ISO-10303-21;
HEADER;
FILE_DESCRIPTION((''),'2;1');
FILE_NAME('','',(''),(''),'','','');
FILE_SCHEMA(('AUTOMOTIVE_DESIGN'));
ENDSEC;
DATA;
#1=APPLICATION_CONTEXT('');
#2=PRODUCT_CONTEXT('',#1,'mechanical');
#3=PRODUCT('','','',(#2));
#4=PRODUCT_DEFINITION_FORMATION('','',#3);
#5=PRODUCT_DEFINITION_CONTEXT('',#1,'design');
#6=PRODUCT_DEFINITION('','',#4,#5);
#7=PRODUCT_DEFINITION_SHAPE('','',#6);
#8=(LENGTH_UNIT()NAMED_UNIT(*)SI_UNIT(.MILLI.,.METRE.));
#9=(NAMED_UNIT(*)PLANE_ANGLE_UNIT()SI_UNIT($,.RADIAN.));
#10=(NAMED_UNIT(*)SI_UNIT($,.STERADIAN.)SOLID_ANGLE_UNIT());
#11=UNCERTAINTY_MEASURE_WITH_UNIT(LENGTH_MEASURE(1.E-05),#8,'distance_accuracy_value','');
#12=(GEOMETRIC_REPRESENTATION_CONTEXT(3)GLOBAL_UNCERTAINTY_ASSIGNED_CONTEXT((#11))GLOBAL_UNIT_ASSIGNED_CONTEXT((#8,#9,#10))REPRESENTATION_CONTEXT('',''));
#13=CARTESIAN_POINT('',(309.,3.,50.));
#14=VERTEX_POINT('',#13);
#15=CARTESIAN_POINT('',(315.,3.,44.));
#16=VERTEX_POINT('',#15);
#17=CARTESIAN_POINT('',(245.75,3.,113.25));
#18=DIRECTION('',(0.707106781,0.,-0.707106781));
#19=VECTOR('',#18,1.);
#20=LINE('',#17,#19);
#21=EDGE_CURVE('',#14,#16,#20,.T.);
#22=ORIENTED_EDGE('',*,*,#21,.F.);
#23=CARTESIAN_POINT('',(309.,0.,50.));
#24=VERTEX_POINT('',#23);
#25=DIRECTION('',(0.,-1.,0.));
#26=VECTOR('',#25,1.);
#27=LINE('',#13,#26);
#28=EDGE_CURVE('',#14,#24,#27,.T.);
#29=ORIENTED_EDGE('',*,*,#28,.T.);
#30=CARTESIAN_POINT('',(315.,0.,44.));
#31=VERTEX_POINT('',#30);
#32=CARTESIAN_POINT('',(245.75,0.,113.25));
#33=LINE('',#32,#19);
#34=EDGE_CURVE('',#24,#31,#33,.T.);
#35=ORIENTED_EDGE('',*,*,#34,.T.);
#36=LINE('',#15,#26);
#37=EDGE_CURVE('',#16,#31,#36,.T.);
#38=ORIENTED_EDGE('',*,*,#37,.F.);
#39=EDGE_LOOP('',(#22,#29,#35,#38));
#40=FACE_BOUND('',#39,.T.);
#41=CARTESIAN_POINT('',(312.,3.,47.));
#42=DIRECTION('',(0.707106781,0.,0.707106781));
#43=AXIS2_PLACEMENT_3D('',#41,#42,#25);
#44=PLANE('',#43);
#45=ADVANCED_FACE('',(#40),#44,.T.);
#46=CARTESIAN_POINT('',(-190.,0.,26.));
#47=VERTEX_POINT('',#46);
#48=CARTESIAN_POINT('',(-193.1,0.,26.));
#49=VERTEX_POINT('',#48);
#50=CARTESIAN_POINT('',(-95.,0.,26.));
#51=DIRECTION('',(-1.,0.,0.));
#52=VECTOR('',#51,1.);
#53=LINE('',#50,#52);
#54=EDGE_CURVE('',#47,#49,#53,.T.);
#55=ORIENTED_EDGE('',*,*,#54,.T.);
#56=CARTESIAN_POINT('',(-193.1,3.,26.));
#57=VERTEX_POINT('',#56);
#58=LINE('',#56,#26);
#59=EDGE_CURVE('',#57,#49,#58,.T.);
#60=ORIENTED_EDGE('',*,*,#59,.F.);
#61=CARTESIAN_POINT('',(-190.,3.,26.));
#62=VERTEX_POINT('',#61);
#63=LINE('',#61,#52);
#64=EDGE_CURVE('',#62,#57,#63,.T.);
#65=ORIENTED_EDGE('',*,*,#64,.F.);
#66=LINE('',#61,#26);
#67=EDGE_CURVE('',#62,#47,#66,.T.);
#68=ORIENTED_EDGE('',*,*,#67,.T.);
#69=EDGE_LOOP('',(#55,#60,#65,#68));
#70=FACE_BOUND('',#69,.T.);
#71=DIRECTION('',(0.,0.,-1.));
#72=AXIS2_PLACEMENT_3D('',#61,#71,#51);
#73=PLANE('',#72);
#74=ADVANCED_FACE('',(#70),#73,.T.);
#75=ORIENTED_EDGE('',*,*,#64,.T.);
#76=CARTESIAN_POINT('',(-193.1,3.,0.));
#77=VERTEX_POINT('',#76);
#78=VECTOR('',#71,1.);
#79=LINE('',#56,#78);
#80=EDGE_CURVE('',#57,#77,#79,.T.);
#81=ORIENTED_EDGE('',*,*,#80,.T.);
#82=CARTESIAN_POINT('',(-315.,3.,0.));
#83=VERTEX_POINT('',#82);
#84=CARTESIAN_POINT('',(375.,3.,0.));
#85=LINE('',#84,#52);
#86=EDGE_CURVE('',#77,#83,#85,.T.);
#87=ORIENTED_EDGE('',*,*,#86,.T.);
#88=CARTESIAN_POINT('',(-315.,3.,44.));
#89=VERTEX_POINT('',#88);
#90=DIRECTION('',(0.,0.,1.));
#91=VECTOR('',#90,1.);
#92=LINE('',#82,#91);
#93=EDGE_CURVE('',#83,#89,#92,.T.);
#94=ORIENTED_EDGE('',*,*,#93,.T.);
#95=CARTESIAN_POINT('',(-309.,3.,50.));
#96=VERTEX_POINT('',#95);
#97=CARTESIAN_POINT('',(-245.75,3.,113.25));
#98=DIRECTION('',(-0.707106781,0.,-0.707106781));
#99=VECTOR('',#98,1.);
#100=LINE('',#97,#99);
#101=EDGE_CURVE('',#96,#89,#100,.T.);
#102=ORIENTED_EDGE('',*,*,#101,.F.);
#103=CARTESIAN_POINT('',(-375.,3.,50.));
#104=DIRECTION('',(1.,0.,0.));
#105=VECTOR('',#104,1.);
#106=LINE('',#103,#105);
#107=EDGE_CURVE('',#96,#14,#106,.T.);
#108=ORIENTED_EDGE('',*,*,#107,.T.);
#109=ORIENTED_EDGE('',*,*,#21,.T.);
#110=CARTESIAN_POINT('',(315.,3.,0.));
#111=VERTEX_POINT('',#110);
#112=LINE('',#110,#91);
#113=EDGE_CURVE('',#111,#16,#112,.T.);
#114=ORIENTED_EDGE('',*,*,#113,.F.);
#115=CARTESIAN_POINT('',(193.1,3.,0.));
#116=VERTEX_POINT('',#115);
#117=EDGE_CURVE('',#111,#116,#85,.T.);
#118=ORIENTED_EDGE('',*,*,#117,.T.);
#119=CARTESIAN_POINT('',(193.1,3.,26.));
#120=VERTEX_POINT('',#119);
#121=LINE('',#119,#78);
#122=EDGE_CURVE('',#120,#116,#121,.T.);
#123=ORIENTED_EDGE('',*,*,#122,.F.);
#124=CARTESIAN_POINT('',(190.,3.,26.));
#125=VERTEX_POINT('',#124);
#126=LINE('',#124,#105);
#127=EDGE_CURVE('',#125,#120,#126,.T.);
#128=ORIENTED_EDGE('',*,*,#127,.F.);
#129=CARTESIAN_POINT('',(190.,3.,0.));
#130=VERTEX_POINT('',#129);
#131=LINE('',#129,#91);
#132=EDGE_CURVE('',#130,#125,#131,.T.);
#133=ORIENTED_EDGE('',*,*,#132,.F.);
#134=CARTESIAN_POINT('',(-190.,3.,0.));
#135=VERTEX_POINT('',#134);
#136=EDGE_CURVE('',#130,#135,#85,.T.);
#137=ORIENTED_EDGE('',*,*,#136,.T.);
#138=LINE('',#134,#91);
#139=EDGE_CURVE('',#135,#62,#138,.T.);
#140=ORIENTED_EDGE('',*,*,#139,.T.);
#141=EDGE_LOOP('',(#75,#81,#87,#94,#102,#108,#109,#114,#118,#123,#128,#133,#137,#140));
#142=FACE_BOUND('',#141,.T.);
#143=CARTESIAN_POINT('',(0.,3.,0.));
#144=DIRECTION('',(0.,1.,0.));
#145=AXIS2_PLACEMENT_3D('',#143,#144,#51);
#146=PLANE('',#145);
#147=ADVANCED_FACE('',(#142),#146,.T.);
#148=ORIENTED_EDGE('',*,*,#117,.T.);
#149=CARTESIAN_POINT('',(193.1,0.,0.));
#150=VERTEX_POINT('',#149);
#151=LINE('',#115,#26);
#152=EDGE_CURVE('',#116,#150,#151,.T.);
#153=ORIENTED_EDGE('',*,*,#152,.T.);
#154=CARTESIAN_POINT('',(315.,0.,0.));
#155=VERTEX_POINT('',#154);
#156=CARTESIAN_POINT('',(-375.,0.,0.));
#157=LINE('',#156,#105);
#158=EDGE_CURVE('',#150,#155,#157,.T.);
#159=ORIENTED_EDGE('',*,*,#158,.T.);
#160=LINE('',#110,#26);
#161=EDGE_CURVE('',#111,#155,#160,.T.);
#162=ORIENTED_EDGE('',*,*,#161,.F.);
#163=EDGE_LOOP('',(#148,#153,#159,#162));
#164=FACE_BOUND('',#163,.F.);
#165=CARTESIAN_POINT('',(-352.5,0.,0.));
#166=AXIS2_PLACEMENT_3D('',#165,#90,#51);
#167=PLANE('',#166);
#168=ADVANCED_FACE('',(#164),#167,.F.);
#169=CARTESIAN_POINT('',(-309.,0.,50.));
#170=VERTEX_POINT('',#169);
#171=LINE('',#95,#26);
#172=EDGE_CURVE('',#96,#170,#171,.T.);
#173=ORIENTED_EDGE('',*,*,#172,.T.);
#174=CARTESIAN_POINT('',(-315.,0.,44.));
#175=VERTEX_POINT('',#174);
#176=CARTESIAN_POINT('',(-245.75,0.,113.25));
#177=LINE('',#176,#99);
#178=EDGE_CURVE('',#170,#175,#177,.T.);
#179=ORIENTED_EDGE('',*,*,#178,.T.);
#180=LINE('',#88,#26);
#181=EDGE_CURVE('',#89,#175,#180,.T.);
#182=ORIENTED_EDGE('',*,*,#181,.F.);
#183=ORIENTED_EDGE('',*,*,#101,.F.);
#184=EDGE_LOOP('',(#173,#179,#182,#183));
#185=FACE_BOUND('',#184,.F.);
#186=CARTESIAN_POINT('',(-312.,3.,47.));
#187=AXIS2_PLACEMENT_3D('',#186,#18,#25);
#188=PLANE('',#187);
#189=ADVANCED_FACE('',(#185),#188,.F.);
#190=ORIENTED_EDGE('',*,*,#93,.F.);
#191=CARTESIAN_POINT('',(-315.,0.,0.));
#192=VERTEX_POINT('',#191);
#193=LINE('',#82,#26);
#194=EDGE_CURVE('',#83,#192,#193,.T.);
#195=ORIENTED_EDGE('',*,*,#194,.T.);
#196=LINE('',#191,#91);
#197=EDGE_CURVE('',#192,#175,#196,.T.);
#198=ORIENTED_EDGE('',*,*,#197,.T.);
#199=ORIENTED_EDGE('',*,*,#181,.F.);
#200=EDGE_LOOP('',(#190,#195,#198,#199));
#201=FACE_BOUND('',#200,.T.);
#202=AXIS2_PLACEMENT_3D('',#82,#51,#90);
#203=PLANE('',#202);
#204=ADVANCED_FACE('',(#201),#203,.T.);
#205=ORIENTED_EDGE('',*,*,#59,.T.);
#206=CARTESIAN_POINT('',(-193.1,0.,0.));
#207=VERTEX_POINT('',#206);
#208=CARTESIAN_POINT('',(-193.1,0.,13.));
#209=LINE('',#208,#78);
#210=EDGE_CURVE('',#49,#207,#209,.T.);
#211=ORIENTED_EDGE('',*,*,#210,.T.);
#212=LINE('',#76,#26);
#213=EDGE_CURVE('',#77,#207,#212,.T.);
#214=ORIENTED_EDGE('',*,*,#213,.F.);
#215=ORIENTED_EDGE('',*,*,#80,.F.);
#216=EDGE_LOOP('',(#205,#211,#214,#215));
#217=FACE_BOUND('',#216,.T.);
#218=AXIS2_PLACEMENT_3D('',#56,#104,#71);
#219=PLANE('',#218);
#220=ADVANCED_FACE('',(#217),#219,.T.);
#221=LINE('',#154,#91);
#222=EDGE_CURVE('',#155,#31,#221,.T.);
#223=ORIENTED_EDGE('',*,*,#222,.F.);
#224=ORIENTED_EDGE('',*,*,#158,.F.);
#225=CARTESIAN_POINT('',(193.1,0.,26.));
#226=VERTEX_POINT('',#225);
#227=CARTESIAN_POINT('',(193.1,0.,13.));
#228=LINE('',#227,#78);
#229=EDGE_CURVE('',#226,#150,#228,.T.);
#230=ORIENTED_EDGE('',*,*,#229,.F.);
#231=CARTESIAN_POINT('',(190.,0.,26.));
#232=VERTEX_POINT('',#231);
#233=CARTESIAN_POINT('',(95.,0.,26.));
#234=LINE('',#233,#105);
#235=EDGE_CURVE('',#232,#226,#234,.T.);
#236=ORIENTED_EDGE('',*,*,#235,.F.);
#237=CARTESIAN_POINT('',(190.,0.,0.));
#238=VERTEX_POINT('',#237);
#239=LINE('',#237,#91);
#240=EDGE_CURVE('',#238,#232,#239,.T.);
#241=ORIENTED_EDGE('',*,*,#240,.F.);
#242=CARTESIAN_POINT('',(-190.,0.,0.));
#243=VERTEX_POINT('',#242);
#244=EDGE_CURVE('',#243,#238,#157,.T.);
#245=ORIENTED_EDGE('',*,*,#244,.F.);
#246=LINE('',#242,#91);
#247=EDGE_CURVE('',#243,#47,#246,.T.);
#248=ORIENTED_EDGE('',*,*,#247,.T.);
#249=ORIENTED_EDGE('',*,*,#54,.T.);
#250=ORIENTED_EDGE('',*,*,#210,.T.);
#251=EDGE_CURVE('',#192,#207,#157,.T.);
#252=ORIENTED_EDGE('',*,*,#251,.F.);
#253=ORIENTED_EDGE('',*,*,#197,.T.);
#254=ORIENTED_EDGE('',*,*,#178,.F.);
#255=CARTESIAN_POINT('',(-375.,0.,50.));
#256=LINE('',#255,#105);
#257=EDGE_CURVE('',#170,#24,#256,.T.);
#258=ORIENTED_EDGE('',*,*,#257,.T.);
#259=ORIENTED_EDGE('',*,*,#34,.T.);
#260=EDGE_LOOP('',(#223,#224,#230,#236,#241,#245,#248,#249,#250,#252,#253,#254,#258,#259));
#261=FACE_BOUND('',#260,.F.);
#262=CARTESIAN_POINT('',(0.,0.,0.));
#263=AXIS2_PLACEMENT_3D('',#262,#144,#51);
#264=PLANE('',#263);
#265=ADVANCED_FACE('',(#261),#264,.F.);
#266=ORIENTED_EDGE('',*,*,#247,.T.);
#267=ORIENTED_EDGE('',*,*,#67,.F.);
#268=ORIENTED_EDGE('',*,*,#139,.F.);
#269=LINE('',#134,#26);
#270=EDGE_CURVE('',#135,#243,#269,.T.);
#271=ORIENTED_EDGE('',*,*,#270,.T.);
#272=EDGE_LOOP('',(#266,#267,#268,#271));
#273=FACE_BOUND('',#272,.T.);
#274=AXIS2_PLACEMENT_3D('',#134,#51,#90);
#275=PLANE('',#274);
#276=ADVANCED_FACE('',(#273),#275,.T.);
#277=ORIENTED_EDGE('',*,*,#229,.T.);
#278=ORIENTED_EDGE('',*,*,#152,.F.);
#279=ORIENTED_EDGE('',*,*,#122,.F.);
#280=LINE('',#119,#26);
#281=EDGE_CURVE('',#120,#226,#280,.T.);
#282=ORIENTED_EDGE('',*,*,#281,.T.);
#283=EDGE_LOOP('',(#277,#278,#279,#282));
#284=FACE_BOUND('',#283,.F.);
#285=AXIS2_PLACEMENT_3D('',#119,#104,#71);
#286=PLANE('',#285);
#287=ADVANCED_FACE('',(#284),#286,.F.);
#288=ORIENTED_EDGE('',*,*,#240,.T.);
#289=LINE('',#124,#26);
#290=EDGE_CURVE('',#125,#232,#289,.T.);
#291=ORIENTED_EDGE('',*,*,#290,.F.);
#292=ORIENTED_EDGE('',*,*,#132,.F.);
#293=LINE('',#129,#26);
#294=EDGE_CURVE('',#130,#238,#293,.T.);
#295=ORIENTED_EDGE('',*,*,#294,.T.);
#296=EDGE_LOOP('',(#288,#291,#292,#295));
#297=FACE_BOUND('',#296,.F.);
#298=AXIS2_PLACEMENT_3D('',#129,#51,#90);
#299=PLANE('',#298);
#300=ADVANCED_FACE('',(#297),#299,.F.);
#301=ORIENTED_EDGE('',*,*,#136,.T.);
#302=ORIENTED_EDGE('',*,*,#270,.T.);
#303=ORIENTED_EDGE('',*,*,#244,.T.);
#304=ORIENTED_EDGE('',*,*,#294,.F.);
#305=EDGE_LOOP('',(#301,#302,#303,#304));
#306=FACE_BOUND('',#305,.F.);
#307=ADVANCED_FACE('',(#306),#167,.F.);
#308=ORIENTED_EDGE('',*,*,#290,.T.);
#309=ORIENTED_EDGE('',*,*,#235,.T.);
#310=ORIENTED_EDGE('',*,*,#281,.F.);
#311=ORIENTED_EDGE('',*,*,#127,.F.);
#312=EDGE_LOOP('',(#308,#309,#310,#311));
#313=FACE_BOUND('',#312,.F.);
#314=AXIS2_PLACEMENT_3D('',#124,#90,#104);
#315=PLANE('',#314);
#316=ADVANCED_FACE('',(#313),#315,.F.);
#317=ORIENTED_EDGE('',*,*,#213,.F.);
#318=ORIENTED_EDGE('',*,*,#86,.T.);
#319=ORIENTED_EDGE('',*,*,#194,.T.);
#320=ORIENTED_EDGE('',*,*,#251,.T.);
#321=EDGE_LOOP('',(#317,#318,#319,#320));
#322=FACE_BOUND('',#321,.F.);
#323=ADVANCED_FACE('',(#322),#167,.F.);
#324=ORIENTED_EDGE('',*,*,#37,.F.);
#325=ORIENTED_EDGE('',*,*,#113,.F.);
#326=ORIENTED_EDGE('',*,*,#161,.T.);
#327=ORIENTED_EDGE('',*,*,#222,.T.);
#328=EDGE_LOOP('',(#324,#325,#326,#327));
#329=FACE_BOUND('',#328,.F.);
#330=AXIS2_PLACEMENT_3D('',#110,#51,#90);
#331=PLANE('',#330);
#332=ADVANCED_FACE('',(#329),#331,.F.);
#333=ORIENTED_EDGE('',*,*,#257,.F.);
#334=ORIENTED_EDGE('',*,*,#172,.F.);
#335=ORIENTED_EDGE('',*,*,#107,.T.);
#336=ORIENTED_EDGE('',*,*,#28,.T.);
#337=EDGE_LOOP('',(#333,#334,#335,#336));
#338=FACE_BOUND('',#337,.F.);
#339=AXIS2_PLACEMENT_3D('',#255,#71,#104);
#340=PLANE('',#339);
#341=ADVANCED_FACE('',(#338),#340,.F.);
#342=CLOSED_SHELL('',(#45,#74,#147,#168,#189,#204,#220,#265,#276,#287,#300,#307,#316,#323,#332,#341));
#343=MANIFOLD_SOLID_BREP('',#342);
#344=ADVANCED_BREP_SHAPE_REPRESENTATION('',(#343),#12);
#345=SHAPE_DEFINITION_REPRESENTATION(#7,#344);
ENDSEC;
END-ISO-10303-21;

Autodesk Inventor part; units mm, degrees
ref_plane "YZ Plane" through (0, 0, 0) normal (1, 0, 0) x (0, 1, 0)
ref_plane "XZ Plane" through (0, 0, 0) normal (0, 1, 0) x (-1, 0, 0)
ref_plane "XY Plane" through (0, 0, 0) normal (0, 0, 1) x (1, 0, 0)
sketch "Sketch2" plane through (0, 0, 0) normal (0, 1, 0) x (-1, 0, 0)
  line L0 (375, 50) -> (-375, 50)
  line L1 (-375, 50) -> (-375, 0)
  line L2 (-375, 0) -> (375, 0)
  line L3 (375, 0) -> (375, 50)
  circle A0 centre (-375, 0) radius 22.5
  circle A1 centre (375, 0) radius 22.5
  point P0 (0, 0)
  point P1 (0, 0)
  point P2 (-375, 22.5)
  point P3 (-352.5, 0)
  point P4 (352.5, 0)
  point P5 (375, 22.5)
  dimension "d18" = 750
  dimension "d19" = 50
  dimension "d20" = 45
extrude "Plate2" add sketch "Sketch2" along normal blind 3 contours L3 A1 L2 A0 L1 L0 | L3 L2 A1 | A0 L2 L1 picked at (360.188, 1.6689) picked at (-360.9308, 4.923)
sketch "Sketch3" plane through (0, 3, 0) normal (0, 1, 0) x (1, 0, 0)
  line L0 (-191.55, 0) -> (-191.55, -50) construction
  line L1 (-375, -50) -> (375, -50) construction
  line L2 (-375, -50) -> (-375, 0) projected
  line L3 (-193.1, 0) -> (-190, 0)
  line L4 (-190, 0) -> (-190, -26)
  line L5 (-190, -26) -> (-193.1, -26)
  line L6 (-193.1, -26) -> (-193.1, 0)
  line L7 (-375, 0) -> (375, 0) projected
  line L8 (375, 0) -> (-375, 0) projected
  line L9 (191.55, 0) -> (191.55, -50) construction
  line L10 (190, -26) -> (193.1, -26)
  line L11 (193.1, -26) -> (193.1, 0)
  line L12 (193.1, 0) -> (190, 0)
  line L13 (190, 0) -> (190, -26)
  line L14 (0, 0) -> (0, -50) construction
  point P0 (0, 0)
  point P1 (0, 0)
  point P2 (190, 0)
  point P3 (193.1, 0)
  dimension "d24" = 26
  dimension "d44" = 3.1
  dimension "d45" = 380
extrude "Extrusion1" cut sketch "Sketch3" against normal through all
sketch "Sketch4" plane through (0, 3, 0) normal (0, 1, 0) x (1, 0, 0)
  line L0 (-190, 0) -> (-190, -26) projected
  line L1 (-190, -26) -> (-193.1, -26) projected
  line L2 (-193.1, -26) -> (-193.1, 0) projected
  line L3 (-375, 0) -> (-193.1, 0) projected
  line L4 (-375, -50) -> (-375, 0) projected
  line L5 (375, -50) -> (-375, -50) projected
  line L6 (375, 0) -> (375, -50) projected
  line L7 (193.1, 0) -> (375, 0) projected
  line L8 (190, -26) -> (190, 0) projected
  line L9 (193.1, -26) -> (190, -26) projected
  line L10 (193.1, 0) -> (193.1, -26) projected
  line L11 (-190, 0) -> (190, 0) projected
  line L12 (-193.1, 0) -> (-375, 0) projected
  line L13 (-315, 0) -> (-315, -50)
  line L14 (315, 0) -> (315, -50)
  line L15 (-375, -50) -> (375, -50) projected
  point P0 (0, 0)
  dimension "d35" = 60
  dimension "d36" = 60
extrude "Extrusion2" cut sketch "Sketch4" against normal through all contours L13 L5 L4 L3 | L7 L6 L5 L14
sketch "Sketch5" plane through (0, 0, 0) normal (0, -1, 0) x (1, 0, 0)
  line L0 (-57.747, 1.3029) -> (-57.747, 31.8939) construction
  line L1 (-57.747, 31.8939) -> (64.2813, 31.8939) construction
  line L2 (64.2813, 31.8939) -> (64.2813, 1.3029) construction
  line L3 (64.2813, 1.3029) -> (-57.747, 1.3029) construction
  point P0 (0, 0)
mark "Mark1"
chamfer "Corner Chamfer1" distance 6 angle 45 2 edges at (-315, 1.5, 50) (315, 1.5, 50)
equation "\"d36\" = d35"
equation "\"d21\" = Thickness"
equation "\"BendReliefWidth\" = Thickness"
equation "\"BendReliefDepth\" = 0.5 * Thickness"
equation "\"CornerReliefSize\" = 4 * Thickness"
equation "\"MinimumRemnant\" = 2 * Thickness"
equation "\"TransitionRadius\" = BendRadius"
equation "\"JacobiRadiusSize\" = BendRadius"
equation "\"GapSize\" = Thickness"
equation "\"Thickness\" = 3"
equation "\"BendRadius\" = 5"
properties part number "MSC 107 RIB CONE" material "Stainless Steel"
